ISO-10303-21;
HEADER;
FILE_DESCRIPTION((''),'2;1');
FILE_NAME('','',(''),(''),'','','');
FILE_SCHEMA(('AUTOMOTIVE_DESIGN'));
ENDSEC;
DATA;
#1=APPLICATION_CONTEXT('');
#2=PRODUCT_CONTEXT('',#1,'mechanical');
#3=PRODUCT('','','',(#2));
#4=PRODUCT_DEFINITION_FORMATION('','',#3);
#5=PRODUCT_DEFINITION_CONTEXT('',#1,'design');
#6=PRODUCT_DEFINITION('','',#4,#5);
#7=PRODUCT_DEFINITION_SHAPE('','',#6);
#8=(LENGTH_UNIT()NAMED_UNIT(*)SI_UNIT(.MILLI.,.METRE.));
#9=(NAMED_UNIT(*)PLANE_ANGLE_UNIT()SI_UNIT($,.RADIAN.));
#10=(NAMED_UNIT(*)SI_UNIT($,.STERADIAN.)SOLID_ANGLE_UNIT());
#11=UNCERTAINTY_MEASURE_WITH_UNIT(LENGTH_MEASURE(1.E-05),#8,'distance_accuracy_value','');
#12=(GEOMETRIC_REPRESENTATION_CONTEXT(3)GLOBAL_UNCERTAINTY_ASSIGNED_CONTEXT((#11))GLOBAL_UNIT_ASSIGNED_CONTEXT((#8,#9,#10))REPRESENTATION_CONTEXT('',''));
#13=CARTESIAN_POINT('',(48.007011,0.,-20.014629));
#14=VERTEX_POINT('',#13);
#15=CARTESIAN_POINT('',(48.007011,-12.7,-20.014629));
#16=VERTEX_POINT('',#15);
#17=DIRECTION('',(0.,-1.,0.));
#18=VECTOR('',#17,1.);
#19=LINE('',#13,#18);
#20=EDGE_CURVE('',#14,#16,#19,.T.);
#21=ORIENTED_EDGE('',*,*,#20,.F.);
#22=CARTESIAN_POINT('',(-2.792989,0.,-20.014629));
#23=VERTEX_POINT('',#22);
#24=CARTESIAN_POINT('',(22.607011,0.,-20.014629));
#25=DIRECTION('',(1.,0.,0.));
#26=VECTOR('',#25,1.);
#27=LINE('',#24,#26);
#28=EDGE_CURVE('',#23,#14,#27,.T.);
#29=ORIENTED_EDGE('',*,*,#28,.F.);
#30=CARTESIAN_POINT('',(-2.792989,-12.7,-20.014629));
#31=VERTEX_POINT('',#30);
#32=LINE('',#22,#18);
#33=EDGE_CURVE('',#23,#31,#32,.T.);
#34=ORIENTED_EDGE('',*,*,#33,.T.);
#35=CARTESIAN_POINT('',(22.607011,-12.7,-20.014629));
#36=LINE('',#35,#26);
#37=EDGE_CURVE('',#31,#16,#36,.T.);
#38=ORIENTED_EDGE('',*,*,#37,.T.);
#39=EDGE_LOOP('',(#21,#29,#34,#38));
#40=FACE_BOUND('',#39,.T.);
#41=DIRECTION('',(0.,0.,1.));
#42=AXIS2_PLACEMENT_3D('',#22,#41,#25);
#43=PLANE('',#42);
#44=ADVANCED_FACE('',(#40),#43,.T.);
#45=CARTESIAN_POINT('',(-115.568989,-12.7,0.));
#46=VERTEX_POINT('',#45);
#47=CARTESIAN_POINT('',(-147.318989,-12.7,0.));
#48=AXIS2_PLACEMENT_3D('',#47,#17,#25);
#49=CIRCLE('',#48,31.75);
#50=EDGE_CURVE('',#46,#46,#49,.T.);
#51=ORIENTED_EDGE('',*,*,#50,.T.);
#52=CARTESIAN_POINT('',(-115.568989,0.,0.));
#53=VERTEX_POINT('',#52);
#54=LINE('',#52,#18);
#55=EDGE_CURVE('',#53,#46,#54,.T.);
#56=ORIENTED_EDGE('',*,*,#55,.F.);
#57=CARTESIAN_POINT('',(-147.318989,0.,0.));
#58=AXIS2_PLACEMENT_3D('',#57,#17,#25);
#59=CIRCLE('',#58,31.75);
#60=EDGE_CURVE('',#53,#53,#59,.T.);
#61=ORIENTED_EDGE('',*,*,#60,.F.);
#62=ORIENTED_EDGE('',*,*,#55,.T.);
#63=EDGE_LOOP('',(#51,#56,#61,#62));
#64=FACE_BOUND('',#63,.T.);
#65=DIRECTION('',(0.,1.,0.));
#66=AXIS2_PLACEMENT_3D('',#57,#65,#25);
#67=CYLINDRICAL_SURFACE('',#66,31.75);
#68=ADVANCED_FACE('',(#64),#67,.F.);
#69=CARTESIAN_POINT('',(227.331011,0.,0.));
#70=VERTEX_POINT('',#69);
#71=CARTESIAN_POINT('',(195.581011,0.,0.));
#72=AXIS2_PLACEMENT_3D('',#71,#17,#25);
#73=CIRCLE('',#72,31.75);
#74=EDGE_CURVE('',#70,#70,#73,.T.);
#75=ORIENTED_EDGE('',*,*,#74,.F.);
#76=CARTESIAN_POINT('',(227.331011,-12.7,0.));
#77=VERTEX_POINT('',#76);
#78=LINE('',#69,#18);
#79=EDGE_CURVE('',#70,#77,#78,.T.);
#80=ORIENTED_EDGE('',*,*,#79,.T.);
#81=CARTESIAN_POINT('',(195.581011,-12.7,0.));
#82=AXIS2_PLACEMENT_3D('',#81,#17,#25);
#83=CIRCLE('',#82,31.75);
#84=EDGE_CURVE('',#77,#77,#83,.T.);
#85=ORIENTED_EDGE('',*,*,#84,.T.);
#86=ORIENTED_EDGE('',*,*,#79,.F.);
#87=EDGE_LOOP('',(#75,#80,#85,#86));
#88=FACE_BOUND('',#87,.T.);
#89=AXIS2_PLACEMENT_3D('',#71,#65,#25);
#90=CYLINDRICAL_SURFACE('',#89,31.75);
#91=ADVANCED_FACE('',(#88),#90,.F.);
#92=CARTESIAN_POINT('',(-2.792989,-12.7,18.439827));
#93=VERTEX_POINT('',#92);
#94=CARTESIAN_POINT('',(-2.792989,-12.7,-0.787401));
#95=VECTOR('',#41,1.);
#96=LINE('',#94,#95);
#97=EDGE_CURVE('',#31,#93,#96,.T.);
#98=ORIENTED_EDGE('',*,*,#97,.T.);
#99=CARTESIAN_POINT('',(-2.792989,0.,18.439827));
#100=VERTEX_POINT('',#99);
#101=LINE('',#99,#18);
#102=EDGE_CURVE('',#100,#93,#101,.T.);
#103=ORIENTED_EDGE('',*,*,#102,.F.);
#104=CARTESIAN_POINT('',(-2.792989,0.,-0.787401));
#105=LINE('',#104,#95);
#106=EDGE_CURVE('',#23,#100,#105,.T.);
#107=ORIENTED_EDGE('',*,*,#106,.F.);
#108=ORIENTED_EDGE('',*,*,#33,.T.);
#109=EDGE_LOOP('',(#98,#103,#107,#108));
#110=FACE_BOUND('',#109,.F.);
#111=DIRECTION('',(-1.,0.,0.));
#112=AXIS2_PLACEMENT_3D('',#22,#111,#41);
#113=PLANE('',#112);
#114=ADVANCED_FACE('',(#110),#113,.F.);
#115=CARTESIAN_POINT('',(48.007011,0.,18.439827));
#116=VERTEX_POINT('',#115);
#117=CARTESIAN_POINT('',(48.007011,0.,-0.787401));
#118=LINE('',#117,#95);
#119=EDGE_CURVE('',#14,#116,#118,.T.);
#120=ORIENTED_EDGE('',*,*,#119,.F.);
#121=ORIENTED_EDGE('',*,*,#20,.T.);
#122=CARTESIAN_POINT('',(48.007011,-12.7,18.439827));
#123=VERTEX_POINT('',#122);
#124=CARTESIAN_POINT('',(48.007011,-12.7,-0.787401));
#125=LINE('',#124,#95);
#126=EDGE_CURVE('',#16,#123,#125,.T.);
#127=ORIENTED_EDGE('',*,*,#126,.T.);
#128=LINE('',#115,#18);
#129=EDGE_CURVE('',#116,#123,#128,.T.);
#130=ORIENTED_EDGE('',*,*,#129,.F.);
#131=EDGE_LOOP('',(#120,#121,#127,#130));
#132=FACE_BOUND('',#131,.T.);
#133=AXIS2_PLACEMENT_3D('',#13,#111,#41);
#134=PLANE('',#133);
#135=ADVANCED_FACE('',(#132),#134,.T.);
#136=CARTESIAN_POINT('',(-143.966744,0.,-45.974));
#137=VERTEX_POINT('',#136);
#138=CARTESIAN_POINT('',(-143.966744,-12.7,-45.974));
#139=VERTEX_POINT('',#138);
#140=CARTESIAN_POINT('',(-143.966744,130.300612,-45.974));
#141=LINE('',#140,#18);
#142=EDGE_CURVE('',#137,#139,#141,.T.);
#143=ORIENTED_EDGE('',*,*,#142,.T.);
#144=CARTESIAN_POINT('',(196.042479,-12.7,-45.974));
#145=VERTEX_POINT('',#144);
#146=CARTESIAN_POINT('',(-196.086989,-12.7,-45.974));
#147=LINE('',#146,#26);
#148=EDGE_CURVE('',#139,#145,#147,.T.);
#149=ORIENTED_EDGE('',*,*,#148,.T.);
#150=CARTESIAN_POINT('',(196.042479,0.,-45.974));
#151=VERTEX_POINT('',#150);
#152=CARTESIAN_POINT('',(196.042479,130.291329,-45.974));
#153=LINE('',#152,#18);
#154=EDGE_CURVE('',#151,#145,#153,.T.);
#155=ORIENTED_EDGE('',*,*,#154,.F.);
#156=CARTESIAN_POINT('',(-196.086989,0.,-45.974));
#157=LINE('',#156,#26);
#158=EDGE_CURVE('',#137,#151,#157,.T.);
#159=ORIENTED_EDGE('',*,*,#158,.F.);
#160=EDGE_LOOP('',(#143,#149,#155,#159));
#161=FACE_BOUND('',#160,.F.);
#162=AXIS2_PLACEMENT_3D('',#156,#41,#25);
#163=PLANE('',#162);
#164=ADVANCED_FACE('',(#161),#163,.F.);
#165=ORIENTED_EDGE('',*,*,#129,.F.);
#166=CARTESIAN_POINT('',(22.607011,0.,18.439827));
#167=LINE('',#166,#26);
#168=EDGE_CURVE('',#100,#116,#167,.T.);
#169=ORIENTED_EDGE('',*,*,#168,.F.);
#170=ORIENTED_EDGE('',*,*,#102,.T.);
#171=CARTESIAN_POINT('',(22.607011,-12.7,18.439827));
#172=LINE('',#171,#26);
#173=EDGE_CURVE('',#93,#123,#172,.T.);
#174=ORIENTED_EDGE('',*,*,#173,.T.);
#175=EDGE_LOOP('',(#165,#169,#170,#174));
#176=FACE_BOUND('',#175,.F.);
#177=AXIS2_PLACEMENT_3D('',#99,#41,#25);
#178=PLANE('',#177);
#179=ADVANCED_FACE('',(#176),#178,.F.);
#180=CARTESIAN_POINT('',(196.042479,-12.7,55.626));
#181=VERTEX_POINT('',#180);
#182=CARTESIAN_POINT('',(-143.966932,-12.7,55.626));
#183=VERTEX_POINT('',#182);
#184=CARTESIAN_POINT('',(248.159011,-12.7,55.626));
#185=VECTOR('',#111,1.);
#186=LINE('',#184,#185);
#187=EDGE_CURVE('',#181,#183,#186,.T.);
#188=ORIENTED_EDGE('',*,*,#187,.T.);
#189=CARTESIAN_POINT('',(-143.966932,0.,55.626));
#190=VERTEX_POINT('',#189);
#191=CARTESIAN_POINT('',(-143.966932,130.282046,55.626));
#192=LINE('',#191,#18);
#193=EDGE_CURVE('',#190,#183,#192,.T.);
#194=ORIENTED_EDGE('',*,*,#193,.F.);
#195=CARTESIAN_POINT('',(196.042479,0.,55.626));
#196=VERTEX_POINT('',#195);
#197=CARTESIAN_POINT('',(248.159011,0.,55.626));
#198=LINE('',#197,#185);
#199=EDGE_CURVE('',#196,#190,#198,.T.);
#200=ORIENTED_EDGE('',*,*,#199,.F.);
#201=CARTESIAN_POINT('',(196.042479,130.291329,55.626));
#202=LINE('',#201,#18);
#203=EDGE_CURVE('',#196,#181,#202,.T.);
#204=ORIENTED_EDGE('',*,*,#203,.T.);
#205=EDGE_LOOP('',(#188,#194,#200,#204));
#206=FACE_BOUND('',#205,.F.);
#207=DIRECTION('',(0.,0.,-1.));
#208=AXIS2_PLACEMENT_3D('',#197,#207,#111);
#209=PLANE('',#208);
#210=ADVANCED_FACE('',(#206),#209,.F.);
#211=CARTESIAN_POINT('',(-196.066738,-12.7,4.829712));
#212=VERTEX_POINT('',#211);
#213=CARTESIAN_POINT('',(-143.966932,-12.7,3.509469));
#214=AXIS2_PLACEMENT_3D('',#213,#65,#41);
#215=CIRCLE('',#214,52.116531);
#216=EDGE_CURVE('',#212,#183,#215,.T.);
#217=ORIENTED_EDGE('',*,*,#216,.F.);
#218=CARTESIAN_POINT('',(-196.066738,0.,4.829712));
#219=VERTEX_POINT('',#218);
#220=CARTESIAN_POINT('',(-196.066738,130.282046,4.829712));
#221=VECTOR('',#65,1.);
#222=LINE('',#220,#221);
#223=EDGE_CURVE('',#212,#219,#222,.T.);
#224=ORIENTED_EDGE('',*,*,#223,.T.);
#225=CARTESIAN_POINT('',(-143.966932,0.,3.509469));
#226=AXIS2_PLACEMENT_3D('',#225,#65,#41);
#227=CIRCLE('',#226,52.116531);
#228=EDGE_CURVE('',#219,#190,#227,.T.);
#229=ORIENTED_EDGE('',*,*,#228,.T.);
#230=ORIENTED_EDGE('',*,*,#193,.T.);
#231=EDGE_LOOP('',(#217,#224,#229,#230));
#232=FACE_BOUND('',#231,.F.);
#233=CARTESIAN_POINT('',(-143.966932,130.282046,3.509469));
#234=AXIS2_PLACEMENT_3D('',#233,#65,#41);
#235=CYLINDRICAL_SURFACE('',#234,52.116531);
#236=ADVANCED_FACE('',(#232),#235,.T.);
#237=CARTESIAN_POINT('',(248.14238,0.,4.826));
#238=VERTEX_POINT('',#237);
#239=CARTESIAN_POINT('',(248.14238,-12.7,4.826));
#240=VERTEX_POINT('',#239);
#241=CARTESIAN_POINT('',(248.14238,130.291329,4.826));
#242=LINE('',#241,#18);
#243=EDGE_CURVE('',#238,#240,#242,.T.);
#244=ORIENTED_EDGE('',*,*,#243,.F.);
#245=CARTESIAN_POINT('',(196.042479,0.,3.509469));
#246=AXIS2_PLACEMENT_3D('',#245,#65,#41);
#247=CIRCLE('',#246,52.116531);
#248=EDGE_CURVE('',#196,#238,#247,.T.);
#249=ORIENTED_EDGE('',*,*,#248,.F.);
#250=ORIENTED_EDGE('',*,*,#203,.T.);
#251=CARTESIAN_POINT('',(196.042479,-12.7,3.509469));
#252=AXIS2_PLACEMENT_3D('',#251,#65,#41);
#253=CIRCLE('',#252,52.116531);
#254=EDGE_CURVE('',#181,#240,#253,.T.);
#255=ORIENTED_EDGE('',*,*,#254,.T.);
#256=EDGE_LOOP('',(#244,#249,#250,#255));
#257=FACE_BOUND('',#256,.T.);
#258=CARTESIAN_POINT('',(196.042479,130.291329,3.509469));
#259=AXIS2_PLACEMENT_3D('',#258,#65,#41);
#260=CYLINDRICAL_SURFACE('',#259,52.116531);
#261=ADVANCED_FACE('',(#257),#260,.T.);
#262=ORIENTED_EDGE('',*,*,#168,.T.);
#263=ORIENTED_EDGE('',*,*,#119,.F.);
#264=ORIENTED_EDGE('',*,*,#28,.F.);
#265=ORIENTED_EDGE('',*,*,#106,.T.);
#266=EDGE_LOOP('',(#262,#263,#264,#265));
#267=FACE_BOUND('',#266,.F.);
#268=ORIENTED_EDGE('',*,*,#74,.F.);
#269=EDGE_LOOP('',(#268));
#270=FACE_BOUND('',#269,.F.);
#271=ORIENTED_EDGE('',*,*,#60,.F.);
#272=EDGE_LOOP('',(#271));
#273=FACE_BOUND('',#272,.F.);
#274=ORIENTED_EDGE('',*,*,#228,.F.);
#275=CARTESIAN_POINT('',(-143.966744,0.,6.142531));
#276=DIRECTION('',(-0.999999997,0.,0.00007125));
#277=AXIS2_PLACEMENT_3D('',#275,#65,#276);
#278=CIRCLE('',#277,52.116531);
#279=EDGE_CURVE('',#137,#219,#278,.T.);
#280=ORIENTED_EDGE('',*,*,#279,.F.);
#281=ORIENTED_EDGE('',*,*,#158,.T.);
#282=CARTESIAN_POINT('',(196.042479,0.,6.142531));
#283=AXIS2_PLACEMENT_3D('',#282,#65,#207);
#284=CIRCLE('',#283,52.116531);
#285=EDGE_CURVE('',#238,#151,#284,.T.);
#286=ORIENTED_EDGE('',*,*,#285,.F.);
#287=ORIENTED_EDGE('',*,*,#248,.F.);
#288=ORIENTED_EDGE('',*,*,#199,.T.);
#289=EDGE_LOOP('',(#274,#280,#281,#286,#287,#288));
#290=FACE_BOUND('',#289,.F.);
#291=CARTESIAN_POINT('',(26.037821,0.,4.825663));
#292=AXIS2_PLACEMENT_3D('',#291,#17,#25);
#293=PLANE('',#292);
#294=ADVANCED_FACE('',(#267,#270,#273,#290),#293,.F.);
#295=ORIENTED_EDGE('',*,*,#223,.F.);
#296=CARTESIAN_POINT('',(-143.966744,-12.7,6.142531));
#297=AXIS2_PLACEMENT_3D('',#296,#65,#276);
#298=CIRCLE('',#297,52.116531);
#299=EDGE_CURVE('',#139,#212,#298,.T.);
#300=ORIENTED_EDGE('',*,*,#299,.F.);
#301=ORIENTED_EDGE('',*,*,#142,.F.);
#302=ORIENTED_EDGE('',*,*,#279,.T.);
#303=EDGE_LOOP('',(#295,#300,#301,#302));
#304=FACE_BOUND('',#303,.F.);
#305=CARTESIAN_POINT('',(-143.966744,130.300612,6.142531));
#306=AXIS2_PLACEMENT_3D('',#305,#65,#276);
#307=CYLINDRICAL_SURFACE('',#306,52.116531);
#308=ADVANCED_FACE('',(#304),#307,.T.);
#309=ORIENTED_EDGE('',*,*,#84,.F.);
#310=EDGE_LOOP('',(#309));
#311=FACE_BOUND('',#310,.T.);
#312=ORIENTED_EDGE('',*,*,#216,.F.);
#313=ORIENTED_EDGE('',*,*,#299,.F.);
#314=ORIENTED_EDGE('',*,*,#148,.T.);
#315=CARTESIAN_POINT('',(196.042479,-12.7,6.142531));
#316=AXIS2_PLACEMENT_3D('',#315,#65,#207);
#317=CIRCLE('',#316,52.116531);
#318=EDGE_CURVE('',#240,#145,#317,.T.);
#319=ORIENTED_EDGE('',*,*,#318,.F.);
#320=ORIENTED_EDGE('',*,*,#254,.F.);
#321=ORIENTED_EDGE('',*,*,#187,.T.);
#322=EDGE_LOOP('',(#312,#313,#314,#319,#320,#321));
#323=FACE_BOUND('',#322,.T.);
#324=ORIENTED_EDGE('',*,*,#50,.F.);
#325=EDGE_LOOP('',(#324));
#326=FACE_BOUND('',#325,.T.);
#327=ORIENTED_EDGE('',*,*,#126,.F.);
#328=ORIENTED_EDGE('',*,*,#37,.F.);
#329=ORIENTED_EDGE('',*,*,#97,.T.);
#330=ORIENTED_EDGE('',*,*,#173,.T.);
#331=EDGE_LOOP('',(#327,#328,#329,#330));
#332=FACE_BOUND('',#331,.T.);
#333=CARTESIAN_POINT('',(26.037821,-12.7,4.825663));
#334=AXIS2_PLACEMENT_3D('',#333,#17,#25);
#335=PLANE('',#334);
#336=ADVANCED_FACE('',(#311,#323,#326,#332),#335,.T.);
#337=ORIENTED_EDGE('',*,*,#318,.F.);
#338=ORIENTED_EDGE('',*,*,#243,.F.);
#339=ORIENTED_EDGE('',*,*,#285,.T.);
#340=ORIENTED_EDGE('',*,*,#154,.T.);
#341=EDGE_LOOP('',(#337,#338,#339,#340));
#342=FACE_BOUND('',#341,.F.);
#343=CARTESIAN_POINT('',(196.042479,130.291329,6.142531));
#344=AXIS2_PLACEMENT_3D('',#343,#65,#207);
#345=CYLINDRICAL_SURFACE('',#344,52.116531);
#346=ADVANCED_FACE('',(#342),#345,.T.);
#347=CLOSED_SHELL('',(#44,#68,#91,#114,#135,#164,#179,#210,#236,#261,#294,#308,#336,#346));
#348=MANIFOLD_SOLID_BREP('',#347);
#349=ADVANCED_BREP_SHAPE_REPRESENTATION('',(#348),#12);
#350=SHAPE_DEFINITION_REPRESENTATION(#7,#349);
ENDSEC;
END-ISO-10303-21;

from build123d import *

# Parameters (mm, degrees)
F0_R        = 31.75
F0_W        = 50.8
F0_H        = 38.4544562548
F1_DEPTH    = 12.7
F2_T1_DEPTH = 273.2826573419
F2_T3_DEPTH = 273.264091489
F2_T5_DEPTH = 273.3012245177


# Not quite as in the source:
# - a fillet or chamfer that OpenCascade refuses, or shapes differently, is made with other operations: its cross-section is extruded or revolved along the edge and cut away or added


with BuildPart() as f1:
    # F0 (on Front) → F1 (new body)
    with BuildSketch(Plane.XZ):
        Polygon((248.1590109615, 55.626), (-196.0797500385, 55.626), (-196.0869890385, -45.974), (248.1590109615, -45.974), align=None)
        with Locations((-147.3189890385, 0)):
            Circle(F0_R, mode=Mode.SUBTRACT)
        with Locations((22.6070109615, -0.7874006405)):
            Rectangle(F0_W, F0_H, mode=Mode.SUBTRACT)
        with Locations((195.5810109615, 0)):
            Circle(F0_R, mode=Mode.SUBTRACT)
    extrude(amount=F1_DEPTH)

    # F2: fillet of radius 52.1165314684 on 4 edges, made by hand

    # F2_s2 → F2_t1 (cut)
    with BuildSketch(Plane.XZ.offset(-130.291328671)):
        with BuildLine():
            ThreePointArc((196.0424794931, 55.626), (232.8944323064, 40.3614213448), (248.1590109615, 3.5094685316))
            Line((248.1590109615, 3.5094685316), (248.1590109615, 55.626))
            Line((248.1590109615, 55.626), (196.0424794931, 55.626))
        make_face()
        with BuildLine():
            ThreePointArc((196.0424794931, -45.974), (232.8944323064, -30.7094213448), (248.1590109615, 6.1425314684))
            Line((248.1590109615, 6.1425314684), (248.1590109615, -45.974))
            Line((248.1590109615, -45.974), (196.0424794931, -45.974))
        make_face()
    extrude(amount=F2_T1_DEPTH, mode=Mode.SUBTRACT)

    # F2_s4 → F2_t3 (cut)
    with BuildSketch(Plane.XZ.offset(-130.2820457445)):
        with BuildLine():
            ThreePointArc((-143.9669317407, 55.626), (-180.8175716797, 40.3627341723), (-196.0834630768, 3.5131818345))
            Line((-196.0834630768, 3.5131818345), (-196.0797500385, 55.626))
            Line((-196.0797500385, 55.626), (-143.9669317407, 55.626))
        make_face()
    extrude(amount=F2_T3_DEPTH, mode=Mode.SUBTRACT)

    # F2_s6 → F2_t5 (cut)
    with BuildSketch(Plane.XZ.offset(-130.3006122588)):
        with BuildLine():
            ThreePointArc((-196.083275471, 6.1462447712), (-180.8200097756, -30.7081084706), (-143.9667441349, -45.974))
            Line((-143.9667441349, -45.974), (-196.0869890385, -45.974))
            Line((-196.0869890385, -45.974), (-196.083275471, 6.1462447712))
        make_face()
    extrude(amount=F2_T5_DEPTH, mode=Mode.SUBTRACT)


solid = f1.part
